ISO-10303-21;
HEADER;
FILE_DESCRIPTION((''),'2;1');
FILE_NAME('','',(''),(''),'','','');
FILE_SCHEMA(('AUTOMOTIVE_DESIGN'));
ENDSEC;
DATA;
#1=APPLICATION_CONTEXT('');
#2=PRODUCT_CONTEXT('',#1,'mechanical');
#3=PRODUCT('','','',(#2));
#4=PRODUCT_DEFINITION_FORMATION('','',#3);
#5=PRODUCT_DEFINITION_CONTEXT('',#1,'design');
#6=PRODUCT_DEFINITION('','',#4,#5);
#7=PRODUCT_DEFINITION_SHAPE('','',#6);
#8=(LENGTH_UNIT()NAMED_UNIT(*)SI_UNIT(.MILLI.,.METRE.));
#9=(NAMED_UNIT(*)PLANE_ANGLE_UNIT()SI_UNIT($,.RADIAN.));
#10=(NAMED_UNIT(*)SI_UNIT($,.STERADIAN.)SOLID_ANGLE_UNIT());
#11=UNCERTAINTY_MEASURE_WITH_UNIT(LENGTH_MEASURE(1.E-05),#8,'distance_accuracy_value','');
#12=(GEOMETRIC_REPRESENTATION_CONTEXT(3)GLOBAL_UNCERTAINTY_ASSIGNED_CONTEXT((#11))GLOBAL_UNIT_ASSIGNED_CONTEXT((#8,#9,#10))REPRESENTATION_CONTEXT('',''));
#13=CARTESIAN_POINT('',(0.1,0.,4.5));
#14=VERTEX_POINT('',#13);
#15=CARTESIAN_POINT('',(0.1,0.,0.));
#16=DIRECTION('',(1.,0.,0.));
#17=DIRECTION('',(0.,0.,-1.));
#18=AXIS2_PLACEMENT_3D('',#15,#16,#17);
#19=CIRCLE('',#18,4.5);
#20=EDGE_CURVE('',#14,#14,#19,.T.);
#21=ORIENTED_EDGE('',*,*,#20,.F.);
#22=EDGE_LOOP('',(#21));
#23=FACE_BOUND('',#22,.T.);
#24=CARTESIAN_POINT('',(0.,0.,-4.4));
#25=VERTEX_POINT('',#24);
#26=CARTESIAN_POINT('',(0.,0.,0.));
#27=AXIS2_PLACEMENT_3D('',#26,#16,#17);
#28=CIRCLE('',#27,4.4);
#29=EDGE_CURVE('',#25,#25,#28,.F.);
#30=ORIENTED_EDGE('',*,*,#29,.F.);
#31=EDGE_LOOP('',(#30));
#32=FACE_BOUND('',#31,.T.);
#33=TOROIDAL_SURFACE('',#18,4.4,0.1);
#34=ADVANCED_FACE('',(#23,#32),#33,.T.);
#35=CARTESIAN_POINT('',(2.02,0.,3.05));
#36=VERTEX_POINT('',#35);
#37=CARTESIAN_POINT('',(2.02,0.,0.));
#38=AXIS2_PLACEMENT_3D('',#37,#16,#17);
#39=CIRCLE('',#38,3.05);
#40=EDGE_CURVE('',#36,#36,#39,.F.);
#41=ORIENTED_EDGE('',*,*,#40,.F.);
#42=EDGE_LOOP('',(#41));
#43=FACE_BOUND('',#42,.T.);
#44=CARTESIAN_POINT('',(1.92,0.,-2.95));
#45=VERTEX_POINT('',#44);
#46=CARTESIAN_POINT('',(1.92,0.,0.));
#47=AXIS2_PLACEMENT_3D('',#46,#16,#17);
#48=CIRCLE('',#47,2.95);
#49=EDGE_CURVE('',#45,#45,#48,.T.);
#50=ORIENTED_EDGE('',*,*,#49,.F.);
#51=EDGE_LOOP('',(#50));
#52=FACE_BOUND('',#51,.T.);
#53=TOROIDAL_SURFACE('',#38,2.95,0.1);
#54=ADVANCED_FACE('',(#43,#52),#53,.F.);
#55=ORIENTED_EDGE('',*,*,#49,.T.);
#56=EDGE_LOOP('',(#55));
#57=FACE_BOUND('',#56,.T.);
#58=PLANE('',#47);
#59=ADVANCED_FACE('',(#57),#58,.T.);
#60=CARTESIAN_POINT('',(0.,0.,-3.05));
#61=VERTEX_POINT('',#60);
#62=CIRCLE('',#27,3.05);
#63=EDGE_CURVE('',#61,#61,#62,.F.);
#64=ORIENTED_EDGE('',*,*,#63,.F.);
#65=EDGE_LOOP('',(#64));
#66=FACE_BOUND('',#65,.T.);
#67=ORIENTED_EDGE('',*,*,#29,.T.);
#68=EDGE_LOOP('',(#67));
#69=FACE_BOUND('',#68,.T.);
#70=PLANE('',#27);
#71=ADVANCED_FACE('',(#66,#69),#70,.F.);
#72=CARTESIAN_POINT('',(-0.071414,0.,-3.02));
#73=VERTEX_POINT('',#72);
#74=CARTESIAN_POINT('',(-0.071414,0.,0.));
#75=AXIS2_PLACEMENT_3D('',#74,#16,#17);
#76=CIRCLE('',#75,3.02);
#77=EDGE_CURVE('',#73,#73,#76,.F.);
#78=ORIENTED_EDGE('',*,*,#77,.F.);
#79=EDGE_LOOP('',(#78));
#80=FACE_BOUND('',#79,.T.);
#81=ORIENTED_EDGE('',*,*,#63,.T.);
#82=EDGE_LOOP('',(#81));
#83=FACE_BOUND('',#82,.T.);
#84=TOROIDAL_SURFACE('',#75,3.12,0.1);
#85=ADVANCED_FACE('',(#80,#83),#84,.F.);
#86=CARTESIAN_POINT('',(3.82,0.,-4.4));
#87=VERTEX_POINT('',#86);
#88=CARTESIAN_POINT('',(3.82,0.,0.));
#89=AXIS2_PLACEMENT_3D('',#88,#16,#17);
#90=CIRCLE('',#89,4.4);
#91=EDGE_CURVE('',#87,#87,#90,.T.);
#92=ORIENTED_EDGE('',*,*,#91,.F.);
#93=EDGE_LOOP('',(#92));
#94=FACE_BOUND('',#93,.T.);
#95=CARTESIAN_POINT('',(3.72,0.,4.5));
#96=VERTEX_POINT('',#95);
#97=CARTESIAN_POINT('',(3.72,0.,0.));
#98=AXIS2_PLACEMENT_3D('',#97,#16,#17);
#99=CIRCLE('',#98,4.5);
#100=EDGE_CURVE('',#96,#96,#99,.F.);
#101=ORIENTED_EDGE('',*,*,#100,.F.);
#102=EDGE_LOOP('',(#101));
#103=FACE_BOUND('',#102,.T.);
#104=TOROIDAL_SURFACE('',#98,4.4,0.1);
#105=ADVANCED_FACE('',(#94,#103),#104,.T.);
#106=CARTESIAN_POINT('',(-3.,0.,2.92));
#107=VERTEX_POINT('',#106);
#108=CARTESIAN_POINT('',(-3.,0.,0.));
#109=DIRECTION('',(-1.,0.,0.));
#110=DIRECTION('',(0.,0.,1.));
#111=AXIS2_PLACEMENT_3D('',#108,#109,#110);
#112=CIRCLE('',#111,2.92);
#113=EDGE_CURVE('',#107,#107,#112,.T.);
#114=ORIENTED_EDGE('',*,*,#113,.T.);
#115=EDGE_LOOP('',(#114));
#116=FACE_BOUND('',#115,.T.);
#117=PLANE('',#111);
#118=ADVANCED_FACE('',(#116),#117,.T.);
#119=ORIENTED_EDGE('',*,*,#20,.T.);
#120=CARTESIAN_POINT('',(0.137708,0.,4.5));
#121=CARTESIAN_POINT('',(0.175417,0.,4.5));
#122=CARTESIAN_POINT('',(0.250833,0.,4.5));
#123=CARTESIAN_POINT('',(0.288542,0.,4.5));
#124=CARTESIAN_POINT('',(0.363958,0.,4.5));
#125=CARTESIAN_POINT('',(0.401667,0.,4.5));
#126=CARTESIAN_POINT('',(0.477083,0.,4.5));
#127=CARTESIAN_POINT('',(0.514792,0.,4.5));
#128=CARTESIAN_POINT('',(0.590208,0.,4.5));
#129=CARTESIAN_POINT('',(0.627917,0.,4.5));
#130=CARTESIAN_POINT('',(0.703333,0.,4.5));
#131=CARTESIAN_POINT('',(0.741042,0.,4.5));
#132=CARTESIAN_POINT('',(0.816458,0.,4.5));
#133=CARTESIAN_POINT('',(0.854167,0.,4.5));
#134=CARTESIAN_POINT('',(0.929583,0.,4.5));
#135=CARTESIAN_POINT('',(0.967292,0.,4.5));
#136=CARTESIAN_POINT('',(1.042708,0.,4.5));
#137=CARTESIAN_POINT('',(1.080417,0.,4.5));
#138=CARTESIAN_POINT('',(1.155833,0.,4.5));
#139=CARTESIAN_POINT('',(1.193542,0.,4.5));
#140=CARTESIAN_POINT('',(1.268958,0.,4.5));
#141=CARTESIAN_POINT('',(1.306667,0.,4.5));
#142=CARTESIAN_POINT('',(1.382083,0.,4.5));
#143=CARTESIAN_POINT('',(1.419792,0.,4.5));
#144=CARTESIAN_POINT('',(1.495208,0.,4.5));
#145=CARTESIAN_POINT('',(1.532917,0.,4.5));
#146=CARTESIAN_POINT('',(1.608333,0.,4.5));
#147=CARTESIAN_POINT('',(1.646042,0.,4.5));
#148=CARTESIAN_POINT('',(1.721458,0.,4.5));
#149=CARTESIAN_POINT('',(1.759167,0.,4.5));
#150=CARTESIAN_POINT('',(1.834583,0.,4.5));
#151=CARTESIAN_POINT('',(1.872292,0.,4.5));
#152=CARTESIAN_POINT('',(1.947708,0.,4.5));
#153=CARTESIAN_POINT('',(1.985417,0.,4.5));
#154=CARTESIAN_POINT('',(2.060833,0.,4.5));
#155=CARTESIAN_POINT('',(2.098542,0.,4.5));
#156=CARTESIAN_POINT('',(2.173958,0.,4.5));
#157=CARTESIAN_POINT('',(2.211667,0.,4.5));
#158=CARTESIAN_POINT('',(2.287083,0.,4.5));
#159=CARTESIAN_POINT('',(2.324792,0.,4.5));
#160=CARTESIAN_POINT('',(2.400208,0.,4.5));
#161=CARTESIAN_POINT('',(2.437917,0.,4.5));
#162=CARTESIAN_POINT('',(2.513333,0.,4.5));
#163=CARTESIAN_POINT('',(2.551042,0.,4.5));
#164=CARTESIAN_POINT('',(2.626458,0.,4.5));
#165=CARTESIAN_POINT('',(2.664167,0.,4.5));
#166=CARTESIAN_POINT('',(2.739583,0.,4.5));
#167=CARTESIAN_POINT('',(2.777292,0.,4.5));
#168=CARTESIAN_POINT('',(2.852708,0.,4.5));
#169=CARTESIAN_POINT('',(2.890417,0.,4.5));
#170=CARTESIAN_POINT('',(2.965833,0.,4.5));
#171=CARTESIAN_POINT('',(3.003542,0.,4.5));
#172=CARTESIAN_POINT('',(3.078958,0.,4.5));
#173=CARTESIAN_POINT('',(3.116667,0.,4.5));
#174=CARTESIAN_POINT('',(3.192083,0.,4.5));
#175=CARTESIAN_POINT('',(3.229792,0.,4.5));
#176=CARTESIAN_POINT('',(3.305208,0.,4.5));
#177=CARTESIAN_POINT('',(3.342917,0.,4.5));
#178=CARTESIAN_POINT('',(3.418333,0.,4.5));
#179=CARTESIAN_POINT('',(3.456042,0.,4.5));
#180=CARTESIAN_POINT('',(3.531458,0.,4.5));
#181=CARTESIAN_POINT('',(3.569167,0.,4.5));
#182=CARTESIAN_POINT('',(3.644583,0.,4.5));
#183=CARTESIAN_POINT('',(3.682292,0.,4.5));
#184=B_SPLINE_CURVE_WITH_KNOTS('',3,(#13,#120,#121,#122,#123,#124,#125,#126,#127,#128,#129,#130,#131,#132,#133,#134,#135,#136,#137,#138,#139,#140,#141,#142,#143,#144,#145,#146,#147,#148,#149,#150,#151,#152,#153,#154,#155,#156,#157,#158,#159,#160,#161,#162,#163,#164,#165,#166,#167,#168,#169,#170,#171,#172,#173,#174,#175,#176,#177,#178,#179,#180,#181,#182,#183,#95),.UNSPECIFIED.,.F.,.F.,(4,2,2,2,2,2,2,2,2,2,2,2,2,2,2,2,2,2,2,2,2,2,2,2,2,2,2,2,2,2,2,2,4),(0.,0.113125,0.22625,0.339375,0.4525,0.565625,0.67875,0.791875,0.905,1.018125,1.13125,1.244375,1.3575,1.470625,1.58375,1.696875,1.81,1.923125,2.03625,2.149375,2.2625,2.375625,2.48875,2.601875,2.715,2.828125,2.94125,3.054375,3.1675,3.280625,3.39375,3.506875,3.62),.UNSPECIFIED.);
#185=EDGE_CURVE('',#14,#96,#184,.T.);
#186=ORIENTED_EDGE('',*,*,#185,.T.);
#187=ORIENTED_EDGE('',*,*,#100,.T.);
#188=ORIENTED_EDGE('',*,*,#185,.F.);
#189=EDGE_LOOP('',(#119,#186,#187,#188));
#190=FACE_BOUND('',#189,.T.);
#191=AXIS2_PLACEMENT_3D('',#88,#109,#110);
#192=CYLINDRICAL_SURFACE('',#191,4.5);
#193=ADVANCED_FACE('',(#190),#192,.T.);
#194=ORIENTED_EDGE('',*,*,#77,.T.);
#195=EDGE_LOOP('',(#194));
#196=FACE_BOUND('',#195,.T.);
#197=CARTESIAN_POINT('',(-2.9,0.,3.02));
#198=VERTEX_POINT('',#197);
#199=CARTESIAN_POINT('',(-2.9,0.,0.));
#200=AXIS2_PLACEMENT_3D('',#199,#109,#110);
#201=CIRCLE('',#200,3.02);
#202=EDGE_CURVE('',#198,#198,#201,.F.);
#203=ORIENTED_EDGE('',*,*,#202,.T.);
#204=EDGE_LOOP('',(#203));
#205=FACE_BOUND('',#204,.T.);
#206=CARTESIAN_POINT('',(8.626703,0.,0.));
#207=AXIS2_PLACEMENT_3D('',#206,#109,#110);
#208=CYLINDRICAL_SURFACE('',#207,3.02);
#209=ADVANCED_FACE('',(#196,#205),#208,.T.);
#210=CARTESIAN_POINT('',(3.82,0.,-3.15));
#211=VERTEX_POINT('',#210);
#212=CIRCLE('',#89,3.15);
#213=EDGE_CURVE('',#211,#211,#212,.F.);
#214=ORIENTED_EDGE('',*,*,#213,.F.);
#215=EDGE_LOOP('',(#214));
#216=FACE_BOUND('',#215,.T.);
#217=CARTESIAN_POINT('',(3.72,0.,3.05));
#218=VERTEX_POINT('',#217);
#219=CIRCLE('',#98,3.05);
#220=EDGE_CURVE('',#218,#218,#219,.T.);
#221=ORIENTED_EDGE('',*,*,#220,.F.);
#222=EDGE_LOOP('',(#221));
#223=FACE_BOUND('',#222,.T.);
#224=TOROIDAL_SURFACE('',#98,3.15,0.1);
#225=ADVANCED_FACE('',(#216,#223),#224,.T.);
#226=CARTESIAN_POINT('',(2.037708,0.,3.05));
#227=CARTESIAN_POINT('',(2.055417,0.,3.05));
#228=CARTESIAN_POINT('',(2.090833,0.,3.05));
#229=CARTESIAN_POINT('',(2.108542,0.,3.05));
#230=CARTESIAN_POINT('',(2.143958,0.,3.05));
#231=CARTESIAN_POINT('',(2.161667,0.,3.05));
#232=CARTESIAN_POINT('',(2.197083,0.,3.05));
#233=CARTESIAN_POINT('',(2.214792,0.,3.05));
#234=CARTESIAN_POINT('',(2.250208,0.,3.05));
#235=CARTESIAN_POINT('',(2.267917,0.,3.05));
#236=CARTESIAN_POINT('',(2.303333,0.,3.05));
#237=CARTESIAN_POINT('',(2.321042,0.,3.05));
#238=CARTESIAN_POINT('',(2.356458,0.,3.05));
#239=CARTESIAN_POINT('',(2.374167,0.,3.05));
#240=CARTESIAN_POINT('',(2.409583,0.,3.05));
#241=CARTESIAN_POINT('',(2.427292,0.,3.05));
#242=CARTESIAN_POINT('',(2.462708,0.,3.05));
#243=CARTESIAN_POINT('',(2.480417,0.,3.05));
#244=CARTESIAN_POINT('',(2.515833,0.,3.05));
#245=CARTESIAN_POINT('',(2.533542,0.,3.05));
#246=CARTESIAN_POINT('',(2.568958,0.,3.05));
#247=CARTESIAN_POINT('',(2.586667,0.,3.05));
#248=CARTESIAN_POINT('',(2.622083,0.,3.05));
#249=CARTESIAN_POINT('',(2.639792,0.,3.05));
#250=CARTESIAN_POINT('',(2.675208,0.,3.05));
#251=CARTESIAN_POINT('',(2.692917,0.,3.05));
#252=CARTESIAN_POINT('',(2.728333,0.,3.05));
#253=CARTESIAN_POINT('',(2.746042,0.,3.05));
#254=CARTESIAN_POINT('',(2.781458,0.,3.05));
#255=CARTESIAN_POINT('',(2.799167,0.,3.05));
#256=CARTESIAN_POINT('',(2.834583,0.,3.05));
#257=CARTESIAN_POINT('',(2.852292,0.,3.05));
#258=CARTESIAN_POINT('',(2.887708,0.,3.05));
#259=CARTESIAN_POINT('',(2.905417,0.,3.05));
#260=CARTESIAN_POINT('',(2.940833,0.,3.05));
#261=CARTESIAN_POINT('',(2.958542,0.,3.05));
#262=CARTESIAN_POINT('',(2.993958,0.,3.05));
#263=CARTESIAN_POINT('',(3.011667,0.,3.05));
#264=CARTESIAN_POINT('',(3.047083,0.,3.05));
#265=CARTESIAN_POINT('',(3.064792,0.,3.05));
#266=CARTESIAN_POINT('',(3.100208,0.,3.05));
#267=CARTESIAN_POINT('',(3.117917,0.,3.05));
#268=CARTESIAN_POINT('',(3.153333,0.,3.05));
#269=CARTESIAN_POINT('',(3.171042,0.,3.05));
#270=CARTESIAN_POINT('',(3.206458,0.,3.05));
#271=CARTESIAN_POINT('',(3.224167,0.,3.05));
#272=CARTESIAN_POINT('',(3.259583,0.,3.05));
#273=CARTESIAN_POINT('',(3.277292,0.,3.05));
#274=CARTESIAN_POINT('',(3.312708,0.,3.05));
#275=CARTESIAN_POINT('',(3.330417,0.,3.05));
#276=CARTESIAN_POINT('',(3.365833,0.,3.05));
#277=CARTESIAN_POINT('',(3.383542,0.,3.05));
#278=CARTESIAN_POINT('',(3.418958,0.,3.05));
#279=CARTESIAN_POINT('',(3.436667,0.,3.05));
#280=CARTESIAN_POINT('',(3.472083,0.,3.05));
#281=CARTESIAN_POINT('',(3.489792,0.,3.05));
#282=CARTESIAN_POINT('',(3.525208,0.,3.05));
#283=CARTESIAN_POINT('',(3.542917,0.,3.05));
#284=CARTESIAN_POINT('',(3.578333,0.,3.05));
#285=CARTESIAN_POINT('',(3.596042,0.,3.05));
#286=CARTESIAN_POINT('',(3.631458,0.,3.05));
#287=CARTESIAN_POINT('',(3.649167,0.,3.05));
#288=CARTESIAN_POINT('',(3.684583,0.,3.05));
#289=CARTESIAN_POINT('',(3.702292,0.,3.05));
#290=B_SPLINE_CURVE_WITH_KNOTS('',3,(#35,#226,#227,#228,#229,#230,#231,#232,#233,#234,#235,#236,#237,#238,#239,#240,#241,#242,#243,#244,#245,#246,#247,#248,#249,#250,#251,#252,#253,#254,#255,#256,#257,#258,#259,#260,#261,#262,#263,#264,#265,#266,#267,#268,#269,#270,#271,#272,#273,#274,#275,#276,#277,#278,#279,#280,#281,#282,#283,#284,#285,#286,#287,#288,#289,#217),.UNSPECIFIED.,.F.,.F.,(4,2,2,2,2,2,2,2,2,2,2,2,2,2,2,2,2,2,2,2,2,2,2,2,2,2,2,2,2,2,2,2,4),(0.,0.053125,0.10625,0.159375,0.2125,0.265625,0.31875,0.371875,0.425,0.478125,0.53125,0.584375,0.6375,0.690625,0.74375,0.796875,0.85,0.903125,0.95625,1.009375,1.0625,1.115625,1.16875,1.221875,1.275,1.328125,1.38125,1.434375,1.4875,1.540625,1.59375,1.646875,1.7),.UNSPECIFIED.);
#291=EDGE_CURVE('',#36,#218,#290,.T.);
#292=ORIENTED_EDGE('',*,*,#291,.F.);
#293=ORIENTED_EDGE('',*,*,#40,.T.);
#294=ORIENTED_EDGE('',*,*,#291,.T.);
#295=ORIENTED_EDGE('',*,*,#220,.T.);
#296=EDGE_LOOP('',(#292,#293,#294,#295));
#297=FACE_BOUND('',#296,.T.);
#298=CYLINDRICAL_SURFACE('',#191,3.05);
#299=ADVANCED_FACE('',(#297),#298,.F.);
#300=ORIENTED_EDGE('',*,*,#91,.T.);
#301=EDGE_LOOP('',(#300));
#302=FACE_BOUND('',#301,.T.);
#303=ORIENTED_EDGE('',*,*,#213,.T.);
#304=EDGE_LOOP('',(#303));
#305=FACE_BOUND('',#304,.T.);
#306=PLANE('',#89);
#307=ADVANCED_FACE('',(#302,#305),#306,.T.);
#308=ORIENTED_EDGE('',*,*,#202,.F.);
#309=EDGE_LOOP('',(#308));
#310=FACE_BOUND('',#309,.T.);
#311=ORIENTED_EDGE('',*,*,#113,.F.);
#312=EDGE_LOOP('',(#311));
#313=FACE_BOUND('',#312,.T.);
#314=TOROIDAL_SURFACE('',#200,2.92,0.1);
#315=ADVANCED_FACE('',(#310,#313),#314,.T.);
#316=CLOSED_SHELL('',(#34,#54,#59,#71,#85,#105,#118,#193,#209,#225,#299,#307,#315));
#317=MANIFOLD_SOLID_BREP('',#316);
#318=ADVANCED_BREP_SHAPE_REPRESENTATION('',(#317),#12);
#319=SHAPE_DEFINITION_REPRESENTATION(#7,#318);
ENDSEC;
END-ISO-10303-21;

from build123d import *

# Parameters (mm, degrees)
SKETCH_1_R           = 4.5
SKETCH_1_R_2         = 3.05
EXTRUDE_1_DEPTH      = 3.82
EXTRUDE_2_DEPTH      = 3
EXTRUDE_2_DEPTH_BACK = 1.92
SKETCH_2_R           = 3.05
SKETCH_3_R           = 3.05
SKETCH_3_R_2         = 3.02
CUT_EXTRUDE_1_DEPTH  = 3
FILLET_1_R           = 0.1
FILLET_2_R           = 0.1
FILLET_3_R           = 0.1
FILLET_4_R           = 0.1


with BuildPart() as part:
    # 草图1 → 凸台-拉伸1 (new body)
    with BuildSketch(Plane(origin=(0, 0, 0), x_dir=(0, 0, -1), z_dir=(1, 0, 0))):
        with Locations(Location((0, 0, 0), (0, 0, 180))):
            Circle(SKETCH_1_R)
        with Locations(Location((0, 0, 0), (0, 0, 180))):
            Circle(SKETCH_1_R_2, mode=Mode.SUBTRACT)
    extrude(amount=EXTRUDE_1_DEPTH)

    # 圆角1
    fillet_1_edges = [part.edges().sort_by_distance(p)[0] for p in [
        (0, 0, -4.5),
        (3.82, 0, -4.5),
        (3.82, 0, -3.05),
    ]]
    fillet(fillet_1_edges, radius=FILLET_1_R)


with BuildPart() as body_2:
    # 草图2 → 凸台-拉伸2 (new, two sides: drawn at the far end of the back side and taken through both)
    with BuildSketch(Plane.ZY.offset(-EXTRUDE_2_DEPTH_BACK)):
        Circle(SKETCH_2_R)
    extrude(amount=EXTRUDE_2_DEPTH + EXTRUDE_2_DEPTH_BACK)

    # 草图3 → 切除-拉伸1 (cut)
    with BuildSketch(Plane.ZY.offset(3)):
        with Locations(Location((0, 0, 0), (0, 0, 180))):
            Circle(SKETCH_3_R)
        Circle(SKETCH_3_R_2, mode=Mode.SUBTRACT)
    extrude(amount=-CUT_EXTRUDE_1_DEPTH, mode=Mode.SUBTRACT)

    # 圆角2
    fillet_2_edges = [body_2.edges().sort_by_distance(p)[0] for p in [
        (-3, 0, -3.02),
    ]]
    fillet(fillet_2_edges, radius=FILLET_2_R)

    # 圆角3
    # the kernel refuses this fillet: 0.1 mm, written as the material it adds along each edge
    with BuildSketch(Plane(origin=(0, 0, 0), x_dir=(0, 0, 1), z_dir=(0, -1, 0))) as fillet_3_piece_1:
        with BuildLine():
            CenterArc((3.12, 0.071414284), FILLET_3_R, 180, 45.572995999)
            Line((3.05, 0), (3.0486, -0.001428286))
            ThreePointArc((3.0486, -0.001428286), (3.035, -0.002), (3.02, -0.002))
            Line((3.02, -0.002), (3.018, 0))
            Line((3.018, 0), (3.018, 0.071414284))
            Line((3.018, 0.071414284), (3.02, 0.071414284))
        make_face()
    revolve(axis=Axis((0, 0, 0), (-1, 0, 0)))


with BuildPart() as part_1:
    add(part.part)

    # Combine 1: union body 2
    add(body_2.part)

    # 圆角4
    fillet_4_edges = [part_1.edges().sort_by_distance(p)[0] for p in [
        (1.92, 0, -3.05),
    ]]
    fillet(fillet_4_edges, radius=FILLET_4_R)


solid = part_1.part
